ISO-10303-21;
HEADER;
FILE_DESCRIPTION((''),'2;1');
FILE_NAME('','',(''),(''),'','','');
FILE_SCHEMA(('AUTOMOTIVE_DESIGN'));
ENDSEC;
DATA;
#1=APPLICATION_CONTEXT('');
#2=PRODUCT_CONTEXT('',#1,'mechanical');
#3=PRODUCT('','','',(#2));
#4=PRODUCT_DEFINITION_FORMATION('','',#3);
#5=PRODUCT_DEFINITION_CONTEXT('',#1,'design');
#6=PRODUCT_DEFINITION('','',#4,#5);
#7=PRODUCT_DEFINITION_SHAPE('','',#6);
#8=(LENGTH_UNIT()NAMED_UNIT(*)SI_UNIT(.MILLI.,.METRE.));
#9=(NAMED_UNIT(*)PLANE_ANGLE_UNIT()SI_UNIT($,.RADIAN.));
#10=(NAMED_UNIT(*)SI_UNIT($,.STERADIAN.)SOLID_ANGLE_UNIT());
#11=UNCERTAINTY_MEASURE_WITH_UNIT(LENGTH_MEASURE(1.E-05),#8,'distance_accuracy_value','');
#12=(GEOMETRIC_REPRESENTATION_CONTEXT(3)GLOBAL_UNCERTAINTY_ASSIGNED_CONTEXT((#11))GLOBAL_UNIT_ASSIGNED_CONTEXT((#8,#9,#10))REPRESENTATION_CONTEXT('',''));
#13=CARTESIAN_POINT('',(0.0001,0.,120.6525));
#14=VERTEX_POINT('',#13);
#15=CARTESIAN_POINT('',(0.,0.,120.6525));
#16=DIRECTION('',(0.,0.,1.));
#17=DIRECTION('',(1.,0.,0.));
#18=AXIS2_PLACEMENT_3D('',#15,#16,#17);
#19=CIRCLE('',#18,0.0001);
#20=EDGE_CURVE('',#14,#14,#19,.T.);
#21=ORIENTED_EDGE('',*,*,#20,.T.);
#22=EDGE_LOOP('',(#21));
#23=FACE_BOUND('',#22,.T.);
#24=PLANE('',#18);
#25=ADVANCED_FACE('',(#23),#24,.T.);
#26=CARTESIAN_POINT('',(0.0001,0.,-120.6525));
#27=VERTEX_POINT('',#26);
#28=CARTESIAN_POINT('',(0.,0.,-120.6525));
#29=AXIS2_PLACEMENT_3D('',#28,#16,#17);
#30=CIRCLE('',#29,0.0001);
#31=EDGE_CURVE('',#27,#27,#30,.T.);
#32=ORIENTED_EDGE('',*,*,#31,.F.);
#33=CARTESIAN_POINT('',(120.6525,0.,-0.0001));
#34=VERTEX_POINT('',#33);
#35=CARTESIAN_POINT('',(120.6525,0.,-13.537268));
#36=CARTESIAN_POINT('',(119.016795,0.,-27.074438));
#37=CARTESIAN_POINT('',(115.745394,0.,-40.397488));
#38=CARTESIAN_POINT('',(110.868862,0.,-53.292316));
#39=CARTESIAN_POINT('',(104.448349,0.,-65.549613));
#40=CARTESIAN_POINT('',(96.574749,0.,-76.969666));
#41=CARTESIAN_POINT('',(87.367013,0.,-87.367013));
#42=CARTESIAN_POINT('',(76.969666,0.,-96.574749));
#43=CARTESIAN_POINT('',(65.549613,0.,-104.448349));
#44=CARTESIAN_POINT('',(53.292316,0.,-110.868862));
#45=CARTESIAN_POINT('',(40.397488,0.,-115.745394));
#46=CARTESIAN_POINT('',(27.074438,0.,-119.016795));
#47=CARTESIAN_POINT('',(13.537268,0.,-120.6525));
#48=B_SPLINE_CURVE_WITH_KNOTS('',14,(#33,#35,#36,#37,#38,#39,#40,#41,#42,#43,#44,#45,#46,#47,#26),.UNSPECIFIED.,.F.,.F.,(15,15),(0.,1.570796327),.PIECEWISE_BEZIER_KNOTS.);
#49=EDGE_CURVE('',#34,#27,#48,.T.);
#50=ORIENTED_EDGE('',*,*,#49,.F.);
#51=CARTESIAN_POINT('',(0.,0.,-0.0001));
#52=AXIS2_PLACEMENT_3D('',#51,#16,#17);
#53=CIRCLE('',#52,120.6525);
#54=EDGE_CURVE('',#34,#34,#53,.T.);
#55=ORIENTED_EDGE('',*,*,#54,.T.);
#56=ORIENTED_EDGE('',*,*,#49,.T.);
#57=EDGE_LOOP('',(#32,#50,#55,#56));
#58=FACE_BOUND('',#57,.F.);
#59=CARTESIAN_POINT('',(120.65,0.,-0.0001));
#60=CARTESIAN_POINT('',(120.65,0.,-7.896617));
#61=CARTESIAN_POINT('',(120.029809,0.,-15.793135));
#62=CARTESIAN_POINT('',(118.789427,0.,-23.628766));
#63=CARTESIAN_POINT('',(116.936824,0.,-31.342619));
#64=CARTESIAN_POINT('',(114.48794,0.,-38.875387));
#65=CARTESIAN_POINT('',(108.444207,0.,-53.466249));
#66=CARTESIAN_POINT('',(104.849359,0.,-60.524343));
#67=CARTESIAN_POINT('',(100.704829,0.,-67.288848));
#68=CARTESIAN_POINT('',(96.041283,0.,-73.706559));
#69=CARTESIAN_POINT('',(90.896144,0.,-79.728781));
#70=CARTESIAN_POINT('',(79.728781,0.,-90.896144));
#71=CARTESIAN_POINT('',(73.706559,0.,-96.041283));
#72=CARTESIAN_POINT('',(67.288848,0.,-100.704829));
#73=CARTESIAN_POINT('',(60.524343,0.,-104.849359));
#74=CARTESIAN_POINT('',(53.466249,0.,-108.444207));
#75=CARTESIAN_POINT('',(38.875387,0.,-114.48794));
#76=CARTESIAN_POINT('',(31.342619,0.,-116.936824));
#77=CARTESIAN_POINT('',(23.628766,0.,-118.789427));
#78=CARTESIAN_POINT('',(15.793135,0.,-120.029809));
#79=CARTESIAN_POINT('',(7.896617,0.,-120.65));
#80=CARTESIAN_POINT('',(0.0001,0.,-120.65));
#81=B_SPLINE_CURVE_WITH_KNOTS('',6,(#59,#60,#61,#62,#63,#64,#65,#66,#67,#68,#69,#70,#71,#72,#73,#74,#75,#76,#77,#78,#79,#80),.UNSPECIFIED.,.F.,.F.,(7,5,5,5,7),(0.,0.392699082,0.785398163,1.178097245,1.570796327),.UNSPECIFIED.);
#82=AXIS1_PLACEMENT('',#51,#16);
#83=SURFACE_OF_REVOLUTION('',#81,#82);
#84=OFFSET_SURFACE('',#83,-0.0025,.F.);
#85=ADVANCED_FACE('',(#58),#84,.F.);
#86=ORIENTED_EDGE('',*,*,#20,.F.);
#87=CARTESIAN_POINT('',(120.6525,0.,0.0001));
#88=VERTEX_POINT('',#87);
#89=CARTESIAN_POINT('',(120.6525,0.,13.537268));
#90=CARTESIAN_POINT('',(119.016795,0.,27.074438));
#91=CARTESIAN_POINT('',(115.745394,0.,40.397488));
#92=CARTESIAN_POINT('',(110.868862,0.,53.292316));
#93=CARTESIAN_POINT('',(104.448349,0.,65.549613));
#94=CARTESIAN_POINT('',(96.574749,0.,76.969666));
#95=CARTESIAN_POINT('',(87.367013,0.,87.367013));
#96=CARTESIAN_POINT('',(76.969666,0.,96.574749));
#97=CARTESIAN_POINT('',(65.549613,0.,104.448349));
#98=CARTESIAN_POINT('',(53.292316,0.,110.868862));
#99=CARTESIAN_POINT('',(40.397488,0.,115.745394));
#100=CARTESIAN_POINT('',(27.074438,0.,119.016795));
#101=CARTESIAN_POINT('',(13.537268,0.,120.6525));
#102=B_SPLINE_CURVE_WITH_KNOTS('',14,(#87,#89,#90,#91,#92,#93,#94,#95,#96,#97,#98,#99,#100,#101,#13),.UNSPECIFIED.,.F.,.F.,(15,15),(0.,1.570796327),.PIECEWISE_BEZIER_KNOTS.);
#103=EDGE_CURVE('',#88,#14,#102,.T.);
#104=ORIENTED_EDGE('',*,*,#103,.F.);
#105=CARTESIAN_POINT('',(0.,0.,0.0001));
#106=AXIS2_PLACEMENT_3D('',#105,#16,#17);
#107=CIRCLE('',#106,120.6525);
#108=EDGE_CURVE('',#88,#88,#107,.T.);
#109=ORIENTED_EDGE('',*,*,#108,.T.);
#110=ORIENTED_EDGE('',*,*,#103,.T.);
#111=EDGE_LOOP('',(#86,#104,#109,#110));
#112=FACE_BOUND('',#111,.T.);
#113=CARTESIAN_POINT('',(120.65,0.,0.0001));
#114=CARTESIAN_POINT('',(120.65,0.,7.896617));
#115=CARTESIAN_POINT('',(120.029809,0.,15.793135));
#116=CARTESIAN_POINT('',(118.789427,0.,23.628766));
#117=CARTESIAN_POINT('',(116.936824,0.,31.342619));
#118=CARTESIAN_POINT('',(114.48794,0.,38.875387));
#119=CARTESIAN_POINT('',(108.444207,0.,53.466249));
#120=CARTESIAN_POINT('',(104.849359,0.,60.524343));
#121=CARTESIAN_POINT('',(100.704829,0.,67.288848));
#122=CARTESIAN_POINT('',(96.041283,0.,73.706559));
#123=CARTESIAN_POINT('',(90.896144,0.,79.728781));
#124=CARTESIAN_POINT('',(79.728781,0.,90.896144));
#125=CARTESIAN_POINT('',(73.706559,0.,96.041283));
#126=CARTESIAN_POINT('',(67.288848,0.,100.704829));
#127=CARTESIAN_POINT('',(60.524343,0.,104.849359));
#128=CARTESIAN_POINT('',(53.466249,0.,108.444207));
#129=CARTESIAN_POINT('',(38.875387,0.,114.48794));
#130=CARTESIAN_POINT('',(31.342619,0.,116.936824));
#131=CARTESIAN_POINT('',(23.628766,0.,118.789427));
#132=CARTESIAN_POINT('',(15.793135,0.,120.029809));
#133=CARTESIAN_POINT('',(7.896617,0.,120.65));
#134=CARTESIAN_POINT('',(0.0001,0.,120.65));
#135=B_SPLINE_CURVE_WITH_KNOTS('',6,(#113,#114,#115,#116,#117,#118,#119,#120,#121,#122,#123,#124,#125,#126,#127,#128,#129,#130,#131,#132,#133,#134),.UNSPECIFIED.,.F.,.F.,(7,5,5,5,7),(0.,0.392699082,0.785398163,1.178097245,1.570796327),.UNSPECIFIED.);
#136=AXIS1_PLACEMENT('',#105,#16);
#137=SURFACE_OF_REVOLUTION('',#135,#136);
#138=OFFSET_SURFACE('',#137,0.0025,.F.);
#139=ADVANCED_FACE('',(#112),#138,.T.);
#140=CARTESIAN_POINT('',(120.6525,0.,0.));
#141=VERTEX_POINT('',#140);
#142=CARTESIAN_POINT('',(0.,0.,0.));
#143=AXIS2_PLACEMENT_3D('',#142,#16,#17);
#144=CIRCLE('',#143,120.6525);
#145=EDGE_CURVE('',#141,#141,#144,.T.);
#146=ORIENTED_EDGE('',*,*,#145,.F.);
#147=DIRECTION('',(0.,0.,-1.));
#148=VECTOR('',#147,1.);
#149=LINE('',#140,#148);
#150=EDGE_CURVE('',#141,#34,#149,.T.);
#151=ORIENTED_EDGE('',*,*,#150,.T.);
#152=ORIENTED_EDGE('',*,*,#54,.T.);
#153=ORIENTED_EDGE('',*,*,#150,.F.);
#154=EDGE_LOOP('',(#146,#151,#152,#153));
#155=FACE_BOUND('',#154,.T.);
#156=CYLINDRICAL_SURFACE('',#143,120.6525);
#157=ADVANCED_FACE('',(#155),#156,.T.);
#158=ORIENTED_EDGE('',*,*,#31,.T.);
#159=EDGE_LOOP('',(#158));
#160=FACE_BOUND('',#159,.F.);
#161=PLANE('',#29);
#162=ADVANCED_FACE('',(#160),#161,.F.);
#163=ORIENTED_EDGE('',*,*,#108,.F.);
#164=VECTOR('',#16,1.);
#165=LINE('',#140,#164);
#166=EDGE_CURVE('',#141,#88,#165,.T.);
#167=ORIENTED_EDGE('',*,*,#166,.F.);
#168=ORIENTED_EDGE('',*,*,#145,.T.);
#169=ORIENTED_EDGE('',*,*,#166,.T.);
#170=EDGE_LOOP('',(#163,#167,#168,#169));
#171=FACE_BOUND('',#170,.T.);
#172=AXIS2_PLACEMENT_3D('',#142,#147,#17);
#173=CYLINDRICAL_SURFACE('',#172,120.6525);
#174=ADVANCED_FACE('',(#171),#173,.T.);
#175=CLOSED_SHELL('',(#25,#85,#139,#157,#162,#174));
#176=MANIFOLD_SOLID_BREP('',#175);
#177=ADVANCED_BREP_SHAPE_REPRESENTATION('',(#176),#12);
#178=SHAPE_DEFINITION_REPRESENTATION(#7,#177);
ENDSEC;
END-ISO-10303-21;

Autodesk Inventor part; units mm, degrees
ref_plane "YZ Plane" through (0, 0, 0) normal (1, 0, 0) x (0, 1, 0)
ref_plane "XZ Plane" through (0, 0, 0) normal (0, 1, 0) x (-1, 0, 0)
ref_plane "XY Plane" through (0, 0, 0) normal (0, 0, 1) x (1, 0, 0)
sketch "Sketch1" plane through (0, 0, 0) normal (0, 0, 1) x (1, 0, 0)
  circle A0 centre (0, 0) radius 120.65
  dimension "d0" = 241.3
extrude "Extrusion1" add sketch "Sketch1" along normal mid plane 241.3
fillet "Fillet1" radius 120.65 2 edges at (-120.65, 0, 120.65) (-120.65, 0, -120.65)
thicken "Thicken1" operation add thickness 0.0025 both sides no extend neighbours yes toward (-0.5, -0.8660254, 0) faces at (-60.325, -104.486, 0.0001) (-60.2761, -104.4012, 4.8582) (-60.325, -104.486, -0.0001) (0, 0, 120.65)
properties part number "2022 Cargo" material "Rubber"
